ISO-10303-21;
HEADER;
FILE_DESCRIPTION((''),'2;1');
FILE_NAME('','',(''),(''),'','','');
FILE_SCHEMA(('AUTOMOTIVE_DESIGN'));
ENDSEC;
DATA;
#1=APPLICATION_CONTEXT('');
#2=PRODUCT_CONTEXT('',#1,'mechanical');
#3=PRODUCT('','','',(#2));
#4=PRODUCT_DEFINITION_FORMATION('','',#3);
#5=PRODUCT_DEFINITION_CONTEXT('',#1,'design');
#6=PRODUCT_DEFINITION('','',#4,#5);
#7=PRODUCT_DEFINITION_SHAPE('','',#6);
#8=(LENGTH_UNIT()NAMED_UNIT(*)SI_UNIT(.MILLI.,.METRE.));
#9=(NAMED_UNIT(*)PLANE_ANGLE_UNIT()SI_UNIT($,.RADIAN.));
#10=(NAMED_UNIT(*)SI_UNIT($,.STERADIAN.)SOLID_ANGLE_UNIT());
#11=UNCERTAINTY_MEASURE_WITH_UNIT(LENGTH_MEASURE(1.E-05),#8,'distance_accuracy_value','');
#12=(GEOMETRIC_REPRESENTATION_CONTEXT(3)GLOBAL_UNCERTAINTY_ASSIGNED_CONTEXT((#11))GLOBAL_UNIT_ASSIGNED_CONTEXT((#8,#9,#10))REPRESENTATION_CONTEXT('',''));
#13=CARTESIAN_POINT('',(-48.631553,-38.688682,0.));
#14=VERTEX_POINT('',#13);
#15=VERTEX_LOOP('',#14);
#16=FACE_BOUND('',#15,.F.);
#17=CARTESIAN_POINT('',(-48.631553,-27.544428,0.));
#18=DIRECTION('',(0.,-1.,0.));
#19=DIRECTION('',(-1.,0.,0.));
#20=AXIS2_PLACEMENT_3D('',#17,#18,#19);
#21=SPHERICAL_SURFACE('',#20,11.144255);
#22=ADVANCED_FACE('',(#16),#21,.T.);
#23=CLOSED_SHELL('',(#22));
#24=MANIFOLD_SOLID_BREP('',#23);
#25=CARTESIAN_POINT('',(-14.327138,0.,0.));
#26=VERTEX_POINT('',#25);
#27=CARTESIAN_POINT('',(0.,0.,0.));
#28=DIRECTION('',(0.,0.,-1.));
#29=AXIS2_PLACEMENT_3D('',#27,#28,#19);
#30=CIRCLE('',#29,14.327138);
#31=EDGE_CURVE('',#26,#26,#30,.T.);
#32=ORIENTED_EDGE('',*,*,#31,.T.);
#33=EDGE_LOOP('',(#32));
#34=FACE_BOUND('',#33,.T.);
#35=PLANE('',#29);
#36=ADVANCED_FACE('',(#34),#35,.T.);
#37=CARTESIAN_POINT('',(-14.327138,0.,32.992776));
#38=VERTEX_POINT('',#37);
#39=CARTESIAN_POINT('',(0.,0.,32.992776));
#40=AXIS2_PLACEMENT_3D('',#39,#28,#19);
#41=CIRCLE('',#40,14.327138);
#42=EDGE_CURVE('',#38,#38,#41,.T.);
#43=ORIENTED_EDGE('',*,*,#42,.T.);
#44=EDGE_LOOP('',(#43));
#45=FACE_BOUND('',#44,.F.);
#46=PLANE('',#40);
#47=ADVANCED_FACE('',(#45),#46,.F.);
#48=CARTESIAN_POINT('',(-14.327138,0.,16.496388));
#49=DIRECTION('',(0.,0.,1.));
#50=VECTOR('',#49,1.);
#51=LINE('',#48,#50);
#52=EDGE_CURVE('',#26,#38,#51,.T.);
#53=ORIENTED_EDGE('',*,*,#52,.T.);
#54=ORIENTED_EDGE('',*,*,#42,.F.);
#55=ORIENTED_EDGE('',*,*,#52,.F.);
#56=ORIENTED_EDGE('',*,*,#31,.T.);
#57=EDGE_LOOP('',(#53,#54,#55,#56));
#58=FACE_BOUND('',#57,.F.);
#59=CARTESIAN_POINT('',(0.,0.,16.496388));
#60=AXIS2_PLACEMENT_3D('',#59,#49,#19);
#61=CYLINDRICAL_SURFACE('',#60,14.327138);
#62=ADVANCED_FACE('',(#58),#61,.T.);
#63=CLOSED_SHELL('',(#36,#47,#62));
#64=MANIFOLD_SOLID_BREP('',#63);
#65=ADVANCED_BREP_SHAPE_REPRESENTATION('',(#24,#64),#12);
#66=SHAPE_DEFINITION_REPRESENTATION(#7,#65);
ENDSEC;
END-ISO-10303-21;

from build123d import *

# Parameters (mm, degrees)
F0_W = 14.327137731
F0_H = 32.9927764833


# Not quite as in the source:
# - the program builds the solid bodies; features that only make, move or delete a surface that nothing else refers to are left out


with BuildPart() as f1:
    # F0 (on Front) → F1 (revolve)
    with BuildSketch(Plane.XZ):
        with Locations((-7.1635688655, 16.4963882416)):
            Rectangle(F0_W, F0_H)
    revolve(axis=Axis((0, 0, 16.4963882416), (0, 0, -1)))


with BuildPart() as f3:
    # F2 (on Top) → F3 (revolve)
    with BuildSketch(Plane.XY):
        with BuildLine():
            Line((-48.6315526068, -27.5444276631), (-48.6315526068, -16.4001730611))
            ThreePointArc((-48.6315526068, -16.4001730611), (-59.7758072088, -27.5444276631), (-48.6315526068, -38.688682265))
            Line((-48.6315526068, -38.688682265), (-48.6315526068, -27.5444276631))
        make_face()
    revolve(axis=Axis((-48.6315526068, -27.5444276631, 0), (0, 1, 0)))


solid = Compound([f1.part, f3.part])
